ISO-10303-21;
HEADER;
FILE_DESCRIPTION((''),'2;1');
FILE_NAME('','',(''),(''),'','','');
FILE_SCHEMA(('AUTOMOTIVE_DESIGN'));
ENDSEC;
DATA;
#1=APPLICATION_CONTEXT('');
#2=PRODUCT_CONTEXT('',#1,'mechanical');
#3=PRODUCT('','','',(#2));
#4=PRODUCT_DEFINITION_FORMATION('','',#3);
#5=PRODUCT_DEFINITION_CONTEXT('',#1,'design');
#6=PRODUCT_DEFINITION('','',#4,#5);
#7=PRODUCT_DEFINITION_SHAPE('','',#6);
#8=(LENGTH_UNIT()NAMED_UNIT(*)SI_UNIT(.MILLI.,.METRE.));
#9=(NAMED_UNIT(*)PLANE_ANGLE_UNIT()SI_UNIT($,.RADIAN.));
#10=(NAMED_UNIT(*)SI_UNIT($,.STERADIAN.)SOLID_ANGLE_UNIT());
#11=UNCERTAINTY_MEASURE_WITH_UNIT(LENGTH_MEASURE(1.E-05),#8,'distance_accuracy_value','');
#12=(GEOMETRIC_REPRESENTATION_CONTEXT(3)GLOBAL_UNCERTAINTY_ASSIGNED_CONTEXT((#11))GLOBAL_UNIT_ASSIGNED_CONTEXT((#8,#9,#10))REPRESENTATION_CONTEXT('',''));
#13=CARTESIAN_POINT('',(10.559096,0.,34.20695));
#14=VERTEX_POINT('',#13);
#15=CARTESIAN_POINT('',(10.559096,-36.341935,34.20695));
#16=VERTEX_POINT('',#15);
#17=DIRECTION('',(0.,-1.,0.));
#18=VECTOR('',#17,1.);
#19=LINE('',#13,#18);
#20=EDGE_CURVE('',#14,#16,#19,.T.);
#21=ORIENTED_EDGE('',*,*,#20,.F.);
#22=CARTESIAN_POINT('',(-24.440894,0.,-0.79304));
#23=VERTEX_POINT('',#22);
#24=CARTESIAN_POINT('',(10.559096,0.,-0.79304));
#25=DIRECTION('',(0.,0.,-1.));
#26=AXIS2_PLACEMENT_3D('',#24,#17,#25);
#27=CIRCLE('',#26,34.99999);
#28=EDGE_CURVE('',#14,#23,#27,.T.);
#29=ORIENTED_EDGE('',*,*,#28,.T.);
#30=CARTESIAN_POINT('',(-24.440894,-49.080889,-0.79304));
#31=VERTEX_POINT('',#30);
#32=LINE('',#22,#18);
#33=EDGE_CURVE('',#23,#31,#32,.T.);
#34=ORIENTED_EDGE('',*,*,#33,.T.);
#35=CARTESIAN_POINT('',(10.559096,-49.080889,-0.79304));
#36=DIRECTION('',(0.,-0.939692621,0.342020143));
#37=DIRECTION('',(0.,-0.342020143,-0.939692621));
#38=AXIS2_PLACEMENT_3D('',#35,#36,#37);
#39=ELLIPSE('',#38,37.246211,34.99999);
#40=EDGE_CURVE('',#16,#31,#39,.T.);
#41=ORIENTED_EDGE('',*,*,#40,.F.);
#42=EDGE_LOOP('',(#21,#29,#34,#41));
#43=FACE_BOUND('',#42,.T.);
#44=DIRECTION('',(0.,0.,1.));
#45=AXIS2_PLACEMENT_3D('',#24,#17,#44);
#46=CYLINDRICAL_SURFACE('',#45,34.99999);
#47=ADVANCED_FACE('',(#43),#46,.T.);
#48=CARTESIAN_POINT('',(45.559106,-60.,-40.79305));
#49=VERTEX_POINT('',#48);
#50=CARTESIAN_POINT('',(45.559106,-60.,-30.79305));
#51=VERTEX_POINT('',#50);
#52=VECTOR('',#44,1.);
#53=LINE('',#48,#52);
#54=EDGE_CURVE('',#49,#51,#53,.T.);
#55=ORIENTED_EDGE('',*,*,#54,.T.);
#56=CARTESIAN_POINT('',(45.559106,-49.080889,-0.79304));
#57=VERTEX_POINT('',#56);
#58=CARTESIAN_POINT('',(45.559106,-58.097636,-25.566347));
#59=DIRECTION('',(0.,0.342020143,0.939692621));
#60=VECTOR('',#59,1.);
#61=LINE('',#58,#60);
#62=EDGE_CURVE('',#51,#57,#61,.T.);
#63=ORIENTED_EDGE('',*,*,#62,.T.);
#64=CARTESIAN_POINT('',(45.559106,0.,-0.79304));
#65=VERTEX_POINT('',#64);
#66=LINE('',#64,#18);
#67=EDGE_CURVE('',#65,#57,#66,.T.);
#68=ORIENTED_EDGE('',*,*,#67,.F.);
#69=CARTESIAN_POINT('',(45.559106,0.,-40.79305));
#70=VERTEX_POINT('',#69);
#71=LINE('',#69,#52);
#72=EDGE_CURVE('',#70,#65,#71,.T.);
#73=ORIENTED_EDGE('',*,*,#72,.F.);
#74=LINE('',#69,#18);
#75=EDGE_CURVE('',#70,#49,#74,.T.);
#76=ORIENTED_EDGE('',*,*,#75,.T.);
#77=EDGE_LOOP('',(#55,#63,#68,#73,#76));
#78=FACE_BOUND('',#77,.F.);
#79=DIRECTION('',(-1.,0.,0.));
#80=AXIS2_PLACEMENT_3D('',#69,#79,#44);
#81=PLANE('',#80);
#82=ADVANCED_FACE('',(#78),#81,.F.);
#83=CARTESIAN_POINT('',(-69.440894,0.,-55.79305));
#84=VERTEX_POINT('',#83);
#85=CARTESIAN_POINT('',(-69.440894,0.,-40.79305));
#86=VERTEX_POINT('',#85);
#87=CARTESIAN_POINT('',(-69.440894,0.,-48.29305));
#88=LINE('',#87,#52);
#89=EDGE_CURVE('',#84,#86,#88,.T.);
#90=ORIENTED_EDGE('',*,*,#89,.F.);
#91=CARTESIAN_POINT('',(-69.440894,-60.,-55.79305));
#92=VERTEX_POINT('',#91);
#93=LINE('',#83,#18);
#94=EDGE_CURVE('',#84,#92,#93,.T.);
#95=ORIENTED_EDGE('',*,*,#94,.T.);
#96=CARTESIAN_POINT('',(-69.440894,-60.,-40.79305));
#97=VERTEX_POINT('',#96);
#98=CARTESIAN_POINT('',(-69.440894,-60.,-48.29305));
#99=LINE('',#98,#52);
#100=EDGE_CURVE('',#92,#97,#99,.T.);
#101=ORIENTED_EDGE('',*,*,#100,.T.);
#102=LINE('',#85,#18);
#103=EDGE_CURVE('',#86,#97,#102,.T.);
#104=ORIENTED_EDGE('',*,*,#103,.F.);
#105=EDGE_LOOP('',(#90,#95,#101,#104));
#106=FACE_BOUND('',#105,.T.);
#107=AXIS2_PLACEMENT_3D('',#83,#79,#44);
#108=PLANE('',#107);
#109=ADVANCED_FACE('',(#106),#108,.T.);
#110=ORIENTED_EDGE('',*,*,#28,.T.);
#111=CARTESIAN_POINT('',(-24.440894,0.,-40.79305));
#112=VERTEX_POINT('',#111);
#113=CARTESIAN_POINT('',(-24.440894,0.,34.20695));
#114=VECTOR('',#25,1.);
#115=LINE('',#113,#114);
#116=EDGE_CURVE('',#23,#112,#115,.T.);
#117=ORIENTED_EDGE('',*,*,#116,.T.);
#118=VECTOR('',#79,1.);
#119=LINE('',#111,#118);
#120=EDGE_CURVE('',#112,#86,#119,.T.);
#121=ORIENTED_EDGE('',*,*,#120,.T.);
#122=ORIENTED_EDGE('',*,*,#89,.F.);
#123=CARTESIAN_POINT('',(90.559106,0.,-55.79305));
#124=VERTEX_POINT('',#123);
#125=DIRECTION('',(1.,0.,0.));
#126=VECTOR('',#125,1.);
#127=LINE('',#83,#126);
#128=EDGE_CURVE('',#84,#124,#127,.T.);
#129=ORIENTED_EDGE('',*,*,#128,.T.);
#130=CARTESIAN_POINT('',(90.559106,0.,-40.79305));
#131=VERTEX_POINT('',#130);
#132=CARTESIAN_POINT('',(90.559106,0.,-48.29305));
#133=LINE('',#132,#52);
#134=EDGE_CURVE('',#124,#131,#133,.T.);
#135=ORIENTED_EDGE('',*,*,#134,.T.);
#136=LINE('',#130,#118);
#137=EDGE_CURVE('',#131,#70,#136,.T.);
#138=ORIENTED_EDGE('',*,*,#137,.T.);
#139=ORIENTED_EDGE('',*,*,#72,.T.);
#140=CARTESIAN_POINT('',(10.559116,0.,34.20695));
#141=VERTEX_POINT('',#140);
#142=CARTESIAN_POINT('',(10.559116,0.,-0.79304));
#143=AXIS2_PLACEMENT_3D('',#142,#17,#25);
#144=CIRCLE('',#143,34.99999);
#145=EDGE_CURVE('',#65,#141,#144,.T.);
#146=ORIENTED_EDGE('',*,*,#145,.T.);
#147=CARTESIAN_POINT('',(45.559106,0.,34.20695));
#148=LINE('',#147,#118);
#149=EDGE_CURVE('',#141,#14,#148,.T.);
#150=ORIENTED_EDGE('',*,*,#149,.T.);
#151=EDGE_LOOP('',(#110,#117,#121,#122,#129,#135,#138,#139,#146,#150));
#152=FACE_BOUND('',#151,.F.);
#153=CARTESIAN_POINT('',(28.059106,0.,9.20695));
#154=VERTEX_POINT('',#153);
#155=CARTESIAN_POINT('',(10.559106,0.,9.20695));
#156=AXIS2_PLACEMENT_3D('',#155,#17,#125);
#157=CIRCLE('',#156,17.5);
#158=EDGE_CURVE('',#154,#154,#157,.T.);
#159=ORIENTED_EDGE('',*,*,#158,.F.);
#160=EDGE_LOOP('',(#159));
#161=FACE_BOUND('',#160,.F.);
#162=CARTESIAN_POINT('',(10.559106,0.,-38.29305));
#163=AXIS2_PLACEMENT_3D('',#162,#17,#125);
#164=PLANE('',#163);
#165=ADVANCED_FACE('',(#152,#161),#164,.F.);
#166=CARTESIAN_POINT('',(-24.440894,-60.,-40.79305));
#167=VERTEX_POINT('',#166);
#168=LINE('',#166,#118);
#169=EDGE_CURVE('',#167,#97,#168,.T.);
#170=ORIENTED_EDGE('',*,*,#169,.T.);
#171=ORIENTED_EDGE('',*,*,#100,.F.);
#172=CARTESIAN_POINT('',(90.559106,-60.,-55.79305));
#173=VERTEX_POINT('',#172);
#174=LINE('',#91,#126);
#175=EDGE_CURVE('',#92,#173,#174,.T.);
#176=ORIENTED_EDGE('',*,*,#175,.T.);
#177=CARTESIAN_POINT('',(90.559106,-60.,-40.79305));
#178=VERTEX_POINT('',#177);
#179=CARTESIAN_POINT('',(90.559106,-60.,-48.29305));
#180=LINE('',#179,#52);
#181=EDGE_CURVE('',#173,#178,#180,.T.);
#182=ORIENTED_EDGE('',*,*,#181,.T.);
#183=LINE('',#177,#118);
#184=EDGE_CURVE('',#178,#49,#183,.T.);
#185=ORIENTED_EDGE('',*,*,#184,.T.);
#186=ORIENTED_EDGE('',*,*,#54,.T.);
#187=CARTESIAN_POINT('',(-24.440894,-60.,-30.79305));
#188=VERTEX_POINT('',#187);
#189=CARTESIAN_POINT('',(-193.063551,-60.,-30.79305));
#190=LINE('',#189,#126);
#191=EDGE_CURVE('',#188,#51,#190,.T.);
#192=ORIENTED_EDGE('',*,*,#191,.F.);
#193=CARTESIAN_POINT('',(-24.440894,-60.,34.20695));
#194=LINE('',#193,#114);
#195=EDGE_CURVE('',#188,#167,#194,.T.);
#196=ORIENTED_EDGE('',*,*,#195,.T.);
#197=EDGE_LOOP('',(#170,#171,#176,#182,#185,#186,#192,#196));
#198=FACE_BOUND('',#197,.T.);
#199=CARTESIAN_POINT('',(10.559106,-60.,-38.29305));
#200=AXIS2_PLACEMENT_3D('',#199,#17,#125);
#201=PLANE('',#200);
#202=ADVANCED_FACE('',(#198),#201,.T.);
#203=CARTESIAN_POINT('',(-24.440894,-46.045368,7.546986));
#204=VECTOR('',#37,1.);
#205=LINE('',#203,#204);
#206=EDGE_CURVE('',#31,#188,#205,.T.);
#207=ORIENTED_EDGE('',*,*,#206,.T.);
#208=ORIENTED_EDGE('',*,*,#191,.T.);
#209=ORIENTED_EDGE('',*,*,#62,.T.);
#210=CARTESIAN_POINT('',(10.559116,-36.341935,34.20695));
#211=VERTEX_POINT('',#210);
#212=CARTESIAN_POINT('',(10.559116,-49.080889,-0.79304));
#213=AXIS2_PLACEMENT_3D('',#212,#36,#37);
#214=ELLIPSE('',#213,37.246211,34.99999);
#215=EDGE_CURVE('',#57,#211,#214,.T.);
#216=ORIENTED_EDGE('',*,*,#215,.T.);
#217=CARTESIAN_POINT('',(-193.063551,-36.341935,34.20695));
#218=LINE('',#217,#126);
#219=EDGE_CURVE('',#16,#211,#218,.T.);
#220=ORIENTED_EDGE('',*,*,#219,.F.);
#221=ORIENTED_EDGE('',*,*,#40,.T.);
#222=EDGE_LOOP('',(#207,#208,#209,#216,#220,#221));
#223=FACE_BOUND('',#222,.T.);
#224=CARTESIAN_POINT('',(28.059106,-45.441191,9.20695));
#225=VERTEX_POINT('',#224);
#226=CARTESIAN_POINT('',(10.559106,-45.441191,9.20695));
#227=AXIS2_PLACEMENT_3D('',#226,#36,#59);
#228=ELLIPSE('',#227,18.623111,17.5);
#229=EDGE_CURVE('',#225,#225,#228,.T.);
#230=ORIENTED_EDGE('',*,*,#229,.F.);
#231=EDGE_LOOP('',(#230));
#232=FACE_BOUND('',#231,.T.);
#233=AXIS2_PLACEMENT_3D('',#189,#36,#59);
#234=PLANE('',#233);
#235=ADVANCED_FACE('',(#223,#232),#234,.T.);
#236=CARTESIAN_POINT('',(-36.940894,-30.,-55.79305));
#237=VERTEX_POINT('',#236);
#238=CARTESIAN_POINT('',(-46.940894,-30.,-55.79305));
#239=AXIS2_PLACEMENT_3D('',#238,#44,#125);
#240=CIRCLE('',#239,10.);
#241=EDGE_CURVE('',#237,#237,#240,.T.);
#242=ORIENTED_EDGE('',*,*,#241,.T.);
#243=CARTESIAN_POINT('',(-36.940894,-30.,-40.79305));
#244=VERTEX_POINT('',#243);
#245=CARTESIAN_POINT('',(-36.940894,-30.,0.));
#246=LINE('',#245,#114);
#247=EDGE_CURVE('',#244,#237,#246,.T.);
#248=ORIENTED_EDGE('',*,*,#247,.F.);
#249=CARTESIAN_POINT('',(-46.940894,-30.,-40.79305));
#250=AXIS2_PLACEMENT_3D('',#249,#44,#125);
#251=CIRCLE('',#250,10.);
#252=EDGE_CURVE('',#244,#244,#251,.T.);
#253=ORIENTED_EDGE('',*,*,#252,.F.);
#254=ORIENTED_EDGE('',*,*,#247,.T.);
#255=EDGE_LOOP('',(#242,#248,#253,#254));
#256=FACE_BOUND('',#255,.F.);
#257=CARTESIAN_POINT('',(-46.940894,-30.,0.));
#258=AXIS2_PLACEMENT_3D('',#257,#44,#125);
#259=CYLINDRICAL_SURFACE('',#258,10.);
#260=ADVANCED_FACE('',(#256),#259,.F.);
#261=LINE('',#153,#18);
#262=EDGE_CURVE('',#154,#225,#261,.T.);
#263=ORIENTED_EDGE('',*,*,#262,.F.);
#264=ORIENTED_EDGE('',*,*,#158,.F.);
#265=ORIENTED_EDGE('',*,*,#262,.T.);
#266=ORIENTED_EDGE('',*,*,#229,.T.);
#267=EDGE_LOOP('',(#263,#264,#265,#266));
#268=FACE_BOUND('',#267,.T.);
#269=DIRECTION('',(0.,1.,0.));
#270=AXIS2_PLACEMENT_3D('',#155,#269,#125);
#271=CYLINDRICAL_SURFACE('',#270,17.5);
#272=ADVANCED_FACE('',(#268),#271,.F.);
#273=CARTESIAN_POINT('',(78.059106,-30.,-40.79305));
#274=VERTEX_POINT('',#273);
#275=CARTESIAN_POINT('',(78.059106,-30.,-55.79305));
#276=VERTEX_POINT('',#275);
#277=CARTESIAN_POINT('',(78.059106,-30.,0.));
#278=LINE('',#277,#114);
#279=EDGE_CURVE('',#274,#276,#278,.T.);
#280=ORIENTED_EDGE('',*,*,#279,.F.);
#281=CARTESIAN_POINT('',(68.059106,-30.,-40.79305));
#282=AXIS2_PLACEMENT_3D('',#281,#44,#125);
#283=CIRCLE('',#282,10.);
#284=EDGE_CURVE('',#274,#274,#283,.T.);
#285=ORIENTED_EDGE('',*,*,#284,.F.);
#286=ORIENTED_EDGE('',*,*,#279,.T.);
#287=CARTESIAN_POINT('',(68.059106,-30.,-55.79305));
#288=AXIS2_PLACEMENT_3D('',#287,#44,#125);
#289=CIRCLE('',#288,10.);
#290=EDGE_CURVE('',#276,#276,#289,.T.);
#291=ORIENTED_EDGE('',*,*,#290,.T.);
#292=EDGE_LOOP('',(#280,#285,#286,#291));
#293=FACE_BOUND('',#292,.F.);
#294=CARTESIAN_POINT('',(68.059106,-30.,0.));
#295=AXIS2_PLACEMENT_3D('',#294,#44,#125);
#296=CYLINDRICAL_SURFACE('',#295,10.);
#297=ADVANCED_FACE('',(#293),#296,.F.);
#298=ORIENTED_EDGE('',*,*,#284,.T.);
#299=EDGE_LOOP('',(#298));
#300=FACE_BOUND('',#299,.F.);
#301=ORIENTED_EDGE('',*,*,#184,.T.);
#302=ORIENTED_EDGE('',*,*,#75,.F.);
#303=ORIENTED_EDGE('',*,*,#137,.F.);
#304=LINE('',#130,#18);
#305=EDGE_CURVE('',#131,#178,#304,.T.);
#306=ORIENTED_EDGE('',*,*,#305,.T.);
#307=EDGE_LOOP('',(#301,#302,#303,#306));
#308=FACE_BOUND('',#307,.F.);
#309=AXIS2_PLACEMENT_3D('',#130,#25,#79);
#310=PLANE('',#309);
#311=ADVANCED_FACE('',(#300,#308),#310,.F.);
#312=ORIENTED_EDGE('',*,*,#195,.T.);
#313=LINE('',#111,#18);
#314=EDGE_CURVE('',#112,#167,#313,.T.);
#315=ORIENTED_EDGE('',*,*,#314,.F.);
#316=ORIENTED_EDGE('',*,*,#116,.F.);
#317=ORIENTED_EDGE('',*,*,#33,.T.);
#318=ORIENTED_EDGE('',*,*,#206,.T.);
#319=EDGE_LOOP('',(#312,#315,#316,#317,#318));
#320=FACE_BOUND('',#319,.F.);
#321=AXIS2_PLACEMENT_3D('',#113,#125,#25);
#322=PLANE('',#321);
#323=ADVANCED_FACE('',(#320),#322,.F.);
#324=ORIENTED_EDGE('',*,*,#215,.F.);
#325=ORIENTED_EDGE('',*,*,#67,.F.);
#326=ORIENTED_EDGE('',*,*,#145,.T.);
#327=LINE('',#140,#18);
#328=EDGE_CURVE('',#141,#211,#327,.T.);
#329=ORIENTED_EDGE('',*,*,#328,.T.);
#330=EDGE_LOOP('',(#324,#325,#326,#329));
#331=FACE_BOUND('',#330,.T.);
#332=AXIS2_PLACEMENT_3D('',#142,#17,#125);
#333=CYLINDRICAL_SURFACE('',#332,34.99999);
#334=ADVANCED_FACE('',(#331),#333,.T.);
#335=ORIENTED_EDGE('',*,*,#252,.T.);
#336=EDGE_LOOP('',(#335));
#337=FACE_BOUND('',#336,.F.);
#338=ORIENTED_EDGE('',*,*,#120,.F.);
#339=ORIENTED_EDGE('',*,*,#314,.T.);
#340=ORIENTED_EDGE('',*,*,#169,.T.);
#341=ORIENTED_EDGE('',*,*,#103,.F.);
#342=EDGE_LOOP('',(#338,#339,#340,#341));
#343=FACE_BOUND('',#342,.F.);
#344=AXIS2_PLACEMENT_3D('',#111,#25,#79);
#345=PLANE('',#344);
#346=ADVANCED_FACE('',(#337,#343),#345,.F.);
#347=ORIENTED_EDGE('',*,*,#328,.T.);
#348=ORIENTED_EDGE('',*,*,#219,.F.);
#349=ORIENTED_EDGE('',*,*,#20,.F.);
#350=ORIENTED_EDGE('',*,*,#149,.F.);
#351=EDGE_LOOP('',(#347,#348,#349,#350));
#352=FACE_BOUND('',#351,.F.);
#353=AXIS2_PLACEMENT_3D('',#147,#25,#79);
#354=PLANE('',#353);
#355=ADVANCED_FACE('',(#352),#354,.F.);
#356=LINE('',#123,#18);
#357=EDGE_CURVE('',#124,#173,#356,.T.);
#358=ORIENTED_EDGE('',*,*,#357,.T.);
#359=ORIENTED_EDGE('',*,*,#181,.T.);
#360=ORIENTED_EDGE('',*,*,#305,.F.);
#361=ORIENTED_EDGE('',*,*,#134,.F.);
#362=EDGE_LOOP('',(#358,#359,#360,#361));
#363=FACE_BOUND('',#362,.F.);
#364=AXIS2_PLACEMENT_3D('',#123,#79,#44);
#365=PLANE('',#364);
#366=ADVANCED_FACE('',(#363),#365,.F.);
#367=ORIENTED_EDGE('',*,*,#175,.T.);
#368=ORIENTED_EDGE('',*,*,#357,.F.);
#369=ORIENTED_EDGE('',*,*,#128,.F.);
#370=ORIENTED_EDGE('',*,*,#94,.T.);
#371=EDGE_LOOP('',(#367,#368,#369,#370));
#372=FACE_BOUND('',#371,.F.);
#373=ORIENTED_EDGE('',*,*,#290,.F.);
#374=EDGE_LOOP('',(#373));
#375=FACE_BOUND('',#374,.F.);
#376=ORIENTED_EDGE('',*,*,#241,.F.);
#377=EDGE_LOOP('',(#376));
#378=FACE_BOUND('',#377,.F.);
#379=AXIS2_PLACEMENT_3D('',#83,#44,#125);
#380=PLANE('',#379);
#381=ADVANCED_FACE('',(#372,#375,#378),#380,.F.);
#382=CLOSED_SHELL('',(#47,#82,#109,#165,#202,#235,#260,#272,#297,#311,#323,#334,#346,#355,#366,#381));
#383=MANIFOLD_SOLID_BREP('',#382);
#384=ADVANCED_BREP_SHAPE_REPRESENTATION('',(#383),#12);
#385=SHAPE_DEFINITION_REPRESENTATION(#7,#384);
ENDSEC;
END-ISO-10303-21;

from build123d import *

# Parameters (mm, degrees)
F0_W        = 22.5
F0_H        = 15
F0_R        = 17.5
F1_DEPTH    = 60
F2_R        = 10
F3_DEPTH    = 75.9
F4_T1_DEPTH = 407.2453152316
F5_R        = 34.99999


# Not quite as in the source:
# - a fillet or chamfer that OpenCascade refuses, or shapes differently, is made with other operations: its cross-section is extruded or revolved along the edge and cut away or added
# - a fillet or chamfer is up to 0.001 mm smaller than in the source, because OpenCascade refuses the exact size


with BuildPart() as f1:
    # F0 (on Front) → F1 (new body)
    with BuildSketch(Plane.XZ):
        Polygon((-24.4408938289, -40.7930500805), (10.5591061711, -40.7930500805), (13.0723165348, -40.7930500805), (45.5591061711, -40.7930500805), (45.5591061711, -35.7930500805), (-24.4408938289, -35.7930500805), align=None)
        Polygon((13.0723165348, -40.7930500805), (10.5591061711, -40.7930500805), (-24.4408938289, -40.7930500805), (-46.9408938289, -40.7930500805), (-46.9408938289, -55.7930500805), (68.0591061711, -55.7930500805), (68.0591061711, -40.7930500805), (45.5591061711, -40.7930500805), align=None)
        with Locations((-58.1908938289, -48.2930500805)):
            Rectangle(F0_W, F0_H)
        Polygon((-24.4408938289, 9.2069499195), (-24.4408938289, -35.7930500805), (45.5591061711, -35.7930500805), (45.5591061711, 9.2069499195), (45.5591061711, 34.2069499195), (-24.4408938289, 34.2069499195), align=None)
        with Locations((10.5591061711, 9.2069499195)):
            Circle(F0_R, mode=Mode.SUBTRACT)
        with Locations((79.3091061711, -48.2930500805)):
            Rectangle(F0_W, F0_H)
    extrude(amount=F1_DEPTH)

    # F2 (on Top) → F3 (cut)
    with BuildSketch(Plane.XY):
        with Locations((-46.9408938289, -30)):
            Circle(F2_R)
        with Locations((68.0591061711, -30)):
            Circle(F2_R)
    extrude(amount=-F3_DEPTH, mode=Mode.SUBTRACT)

    # F4: chamfer of 65 x 23.6580652273 on 1 edges, made by hand

    # F4_s2 → F4_t1 (cut)
    with BuildSketch(Plane.YZ.offset(-193.0635514447)):
        Polygon((-60, -30.7930500805), (-36.3419347727, 34.2069499195), (-60, 34.2069499195), align=None)
    extrude(amount=F4_T1_DEPTH, mode=Mode.SUBTRACT)

    # F5 (radius 35 in the source; OpenCascade refuses exactly that, so slightly less here)
    f5_edges = [f1.edges().sort_by_distance(p)[0] for p in [
        (45.559106, -18.170967, 34.20695),
        (-24.440894, -18.170967, 34.20695),
    ]]
    fillet(f5_edges, radius=F5_R)


solid = f1.part
